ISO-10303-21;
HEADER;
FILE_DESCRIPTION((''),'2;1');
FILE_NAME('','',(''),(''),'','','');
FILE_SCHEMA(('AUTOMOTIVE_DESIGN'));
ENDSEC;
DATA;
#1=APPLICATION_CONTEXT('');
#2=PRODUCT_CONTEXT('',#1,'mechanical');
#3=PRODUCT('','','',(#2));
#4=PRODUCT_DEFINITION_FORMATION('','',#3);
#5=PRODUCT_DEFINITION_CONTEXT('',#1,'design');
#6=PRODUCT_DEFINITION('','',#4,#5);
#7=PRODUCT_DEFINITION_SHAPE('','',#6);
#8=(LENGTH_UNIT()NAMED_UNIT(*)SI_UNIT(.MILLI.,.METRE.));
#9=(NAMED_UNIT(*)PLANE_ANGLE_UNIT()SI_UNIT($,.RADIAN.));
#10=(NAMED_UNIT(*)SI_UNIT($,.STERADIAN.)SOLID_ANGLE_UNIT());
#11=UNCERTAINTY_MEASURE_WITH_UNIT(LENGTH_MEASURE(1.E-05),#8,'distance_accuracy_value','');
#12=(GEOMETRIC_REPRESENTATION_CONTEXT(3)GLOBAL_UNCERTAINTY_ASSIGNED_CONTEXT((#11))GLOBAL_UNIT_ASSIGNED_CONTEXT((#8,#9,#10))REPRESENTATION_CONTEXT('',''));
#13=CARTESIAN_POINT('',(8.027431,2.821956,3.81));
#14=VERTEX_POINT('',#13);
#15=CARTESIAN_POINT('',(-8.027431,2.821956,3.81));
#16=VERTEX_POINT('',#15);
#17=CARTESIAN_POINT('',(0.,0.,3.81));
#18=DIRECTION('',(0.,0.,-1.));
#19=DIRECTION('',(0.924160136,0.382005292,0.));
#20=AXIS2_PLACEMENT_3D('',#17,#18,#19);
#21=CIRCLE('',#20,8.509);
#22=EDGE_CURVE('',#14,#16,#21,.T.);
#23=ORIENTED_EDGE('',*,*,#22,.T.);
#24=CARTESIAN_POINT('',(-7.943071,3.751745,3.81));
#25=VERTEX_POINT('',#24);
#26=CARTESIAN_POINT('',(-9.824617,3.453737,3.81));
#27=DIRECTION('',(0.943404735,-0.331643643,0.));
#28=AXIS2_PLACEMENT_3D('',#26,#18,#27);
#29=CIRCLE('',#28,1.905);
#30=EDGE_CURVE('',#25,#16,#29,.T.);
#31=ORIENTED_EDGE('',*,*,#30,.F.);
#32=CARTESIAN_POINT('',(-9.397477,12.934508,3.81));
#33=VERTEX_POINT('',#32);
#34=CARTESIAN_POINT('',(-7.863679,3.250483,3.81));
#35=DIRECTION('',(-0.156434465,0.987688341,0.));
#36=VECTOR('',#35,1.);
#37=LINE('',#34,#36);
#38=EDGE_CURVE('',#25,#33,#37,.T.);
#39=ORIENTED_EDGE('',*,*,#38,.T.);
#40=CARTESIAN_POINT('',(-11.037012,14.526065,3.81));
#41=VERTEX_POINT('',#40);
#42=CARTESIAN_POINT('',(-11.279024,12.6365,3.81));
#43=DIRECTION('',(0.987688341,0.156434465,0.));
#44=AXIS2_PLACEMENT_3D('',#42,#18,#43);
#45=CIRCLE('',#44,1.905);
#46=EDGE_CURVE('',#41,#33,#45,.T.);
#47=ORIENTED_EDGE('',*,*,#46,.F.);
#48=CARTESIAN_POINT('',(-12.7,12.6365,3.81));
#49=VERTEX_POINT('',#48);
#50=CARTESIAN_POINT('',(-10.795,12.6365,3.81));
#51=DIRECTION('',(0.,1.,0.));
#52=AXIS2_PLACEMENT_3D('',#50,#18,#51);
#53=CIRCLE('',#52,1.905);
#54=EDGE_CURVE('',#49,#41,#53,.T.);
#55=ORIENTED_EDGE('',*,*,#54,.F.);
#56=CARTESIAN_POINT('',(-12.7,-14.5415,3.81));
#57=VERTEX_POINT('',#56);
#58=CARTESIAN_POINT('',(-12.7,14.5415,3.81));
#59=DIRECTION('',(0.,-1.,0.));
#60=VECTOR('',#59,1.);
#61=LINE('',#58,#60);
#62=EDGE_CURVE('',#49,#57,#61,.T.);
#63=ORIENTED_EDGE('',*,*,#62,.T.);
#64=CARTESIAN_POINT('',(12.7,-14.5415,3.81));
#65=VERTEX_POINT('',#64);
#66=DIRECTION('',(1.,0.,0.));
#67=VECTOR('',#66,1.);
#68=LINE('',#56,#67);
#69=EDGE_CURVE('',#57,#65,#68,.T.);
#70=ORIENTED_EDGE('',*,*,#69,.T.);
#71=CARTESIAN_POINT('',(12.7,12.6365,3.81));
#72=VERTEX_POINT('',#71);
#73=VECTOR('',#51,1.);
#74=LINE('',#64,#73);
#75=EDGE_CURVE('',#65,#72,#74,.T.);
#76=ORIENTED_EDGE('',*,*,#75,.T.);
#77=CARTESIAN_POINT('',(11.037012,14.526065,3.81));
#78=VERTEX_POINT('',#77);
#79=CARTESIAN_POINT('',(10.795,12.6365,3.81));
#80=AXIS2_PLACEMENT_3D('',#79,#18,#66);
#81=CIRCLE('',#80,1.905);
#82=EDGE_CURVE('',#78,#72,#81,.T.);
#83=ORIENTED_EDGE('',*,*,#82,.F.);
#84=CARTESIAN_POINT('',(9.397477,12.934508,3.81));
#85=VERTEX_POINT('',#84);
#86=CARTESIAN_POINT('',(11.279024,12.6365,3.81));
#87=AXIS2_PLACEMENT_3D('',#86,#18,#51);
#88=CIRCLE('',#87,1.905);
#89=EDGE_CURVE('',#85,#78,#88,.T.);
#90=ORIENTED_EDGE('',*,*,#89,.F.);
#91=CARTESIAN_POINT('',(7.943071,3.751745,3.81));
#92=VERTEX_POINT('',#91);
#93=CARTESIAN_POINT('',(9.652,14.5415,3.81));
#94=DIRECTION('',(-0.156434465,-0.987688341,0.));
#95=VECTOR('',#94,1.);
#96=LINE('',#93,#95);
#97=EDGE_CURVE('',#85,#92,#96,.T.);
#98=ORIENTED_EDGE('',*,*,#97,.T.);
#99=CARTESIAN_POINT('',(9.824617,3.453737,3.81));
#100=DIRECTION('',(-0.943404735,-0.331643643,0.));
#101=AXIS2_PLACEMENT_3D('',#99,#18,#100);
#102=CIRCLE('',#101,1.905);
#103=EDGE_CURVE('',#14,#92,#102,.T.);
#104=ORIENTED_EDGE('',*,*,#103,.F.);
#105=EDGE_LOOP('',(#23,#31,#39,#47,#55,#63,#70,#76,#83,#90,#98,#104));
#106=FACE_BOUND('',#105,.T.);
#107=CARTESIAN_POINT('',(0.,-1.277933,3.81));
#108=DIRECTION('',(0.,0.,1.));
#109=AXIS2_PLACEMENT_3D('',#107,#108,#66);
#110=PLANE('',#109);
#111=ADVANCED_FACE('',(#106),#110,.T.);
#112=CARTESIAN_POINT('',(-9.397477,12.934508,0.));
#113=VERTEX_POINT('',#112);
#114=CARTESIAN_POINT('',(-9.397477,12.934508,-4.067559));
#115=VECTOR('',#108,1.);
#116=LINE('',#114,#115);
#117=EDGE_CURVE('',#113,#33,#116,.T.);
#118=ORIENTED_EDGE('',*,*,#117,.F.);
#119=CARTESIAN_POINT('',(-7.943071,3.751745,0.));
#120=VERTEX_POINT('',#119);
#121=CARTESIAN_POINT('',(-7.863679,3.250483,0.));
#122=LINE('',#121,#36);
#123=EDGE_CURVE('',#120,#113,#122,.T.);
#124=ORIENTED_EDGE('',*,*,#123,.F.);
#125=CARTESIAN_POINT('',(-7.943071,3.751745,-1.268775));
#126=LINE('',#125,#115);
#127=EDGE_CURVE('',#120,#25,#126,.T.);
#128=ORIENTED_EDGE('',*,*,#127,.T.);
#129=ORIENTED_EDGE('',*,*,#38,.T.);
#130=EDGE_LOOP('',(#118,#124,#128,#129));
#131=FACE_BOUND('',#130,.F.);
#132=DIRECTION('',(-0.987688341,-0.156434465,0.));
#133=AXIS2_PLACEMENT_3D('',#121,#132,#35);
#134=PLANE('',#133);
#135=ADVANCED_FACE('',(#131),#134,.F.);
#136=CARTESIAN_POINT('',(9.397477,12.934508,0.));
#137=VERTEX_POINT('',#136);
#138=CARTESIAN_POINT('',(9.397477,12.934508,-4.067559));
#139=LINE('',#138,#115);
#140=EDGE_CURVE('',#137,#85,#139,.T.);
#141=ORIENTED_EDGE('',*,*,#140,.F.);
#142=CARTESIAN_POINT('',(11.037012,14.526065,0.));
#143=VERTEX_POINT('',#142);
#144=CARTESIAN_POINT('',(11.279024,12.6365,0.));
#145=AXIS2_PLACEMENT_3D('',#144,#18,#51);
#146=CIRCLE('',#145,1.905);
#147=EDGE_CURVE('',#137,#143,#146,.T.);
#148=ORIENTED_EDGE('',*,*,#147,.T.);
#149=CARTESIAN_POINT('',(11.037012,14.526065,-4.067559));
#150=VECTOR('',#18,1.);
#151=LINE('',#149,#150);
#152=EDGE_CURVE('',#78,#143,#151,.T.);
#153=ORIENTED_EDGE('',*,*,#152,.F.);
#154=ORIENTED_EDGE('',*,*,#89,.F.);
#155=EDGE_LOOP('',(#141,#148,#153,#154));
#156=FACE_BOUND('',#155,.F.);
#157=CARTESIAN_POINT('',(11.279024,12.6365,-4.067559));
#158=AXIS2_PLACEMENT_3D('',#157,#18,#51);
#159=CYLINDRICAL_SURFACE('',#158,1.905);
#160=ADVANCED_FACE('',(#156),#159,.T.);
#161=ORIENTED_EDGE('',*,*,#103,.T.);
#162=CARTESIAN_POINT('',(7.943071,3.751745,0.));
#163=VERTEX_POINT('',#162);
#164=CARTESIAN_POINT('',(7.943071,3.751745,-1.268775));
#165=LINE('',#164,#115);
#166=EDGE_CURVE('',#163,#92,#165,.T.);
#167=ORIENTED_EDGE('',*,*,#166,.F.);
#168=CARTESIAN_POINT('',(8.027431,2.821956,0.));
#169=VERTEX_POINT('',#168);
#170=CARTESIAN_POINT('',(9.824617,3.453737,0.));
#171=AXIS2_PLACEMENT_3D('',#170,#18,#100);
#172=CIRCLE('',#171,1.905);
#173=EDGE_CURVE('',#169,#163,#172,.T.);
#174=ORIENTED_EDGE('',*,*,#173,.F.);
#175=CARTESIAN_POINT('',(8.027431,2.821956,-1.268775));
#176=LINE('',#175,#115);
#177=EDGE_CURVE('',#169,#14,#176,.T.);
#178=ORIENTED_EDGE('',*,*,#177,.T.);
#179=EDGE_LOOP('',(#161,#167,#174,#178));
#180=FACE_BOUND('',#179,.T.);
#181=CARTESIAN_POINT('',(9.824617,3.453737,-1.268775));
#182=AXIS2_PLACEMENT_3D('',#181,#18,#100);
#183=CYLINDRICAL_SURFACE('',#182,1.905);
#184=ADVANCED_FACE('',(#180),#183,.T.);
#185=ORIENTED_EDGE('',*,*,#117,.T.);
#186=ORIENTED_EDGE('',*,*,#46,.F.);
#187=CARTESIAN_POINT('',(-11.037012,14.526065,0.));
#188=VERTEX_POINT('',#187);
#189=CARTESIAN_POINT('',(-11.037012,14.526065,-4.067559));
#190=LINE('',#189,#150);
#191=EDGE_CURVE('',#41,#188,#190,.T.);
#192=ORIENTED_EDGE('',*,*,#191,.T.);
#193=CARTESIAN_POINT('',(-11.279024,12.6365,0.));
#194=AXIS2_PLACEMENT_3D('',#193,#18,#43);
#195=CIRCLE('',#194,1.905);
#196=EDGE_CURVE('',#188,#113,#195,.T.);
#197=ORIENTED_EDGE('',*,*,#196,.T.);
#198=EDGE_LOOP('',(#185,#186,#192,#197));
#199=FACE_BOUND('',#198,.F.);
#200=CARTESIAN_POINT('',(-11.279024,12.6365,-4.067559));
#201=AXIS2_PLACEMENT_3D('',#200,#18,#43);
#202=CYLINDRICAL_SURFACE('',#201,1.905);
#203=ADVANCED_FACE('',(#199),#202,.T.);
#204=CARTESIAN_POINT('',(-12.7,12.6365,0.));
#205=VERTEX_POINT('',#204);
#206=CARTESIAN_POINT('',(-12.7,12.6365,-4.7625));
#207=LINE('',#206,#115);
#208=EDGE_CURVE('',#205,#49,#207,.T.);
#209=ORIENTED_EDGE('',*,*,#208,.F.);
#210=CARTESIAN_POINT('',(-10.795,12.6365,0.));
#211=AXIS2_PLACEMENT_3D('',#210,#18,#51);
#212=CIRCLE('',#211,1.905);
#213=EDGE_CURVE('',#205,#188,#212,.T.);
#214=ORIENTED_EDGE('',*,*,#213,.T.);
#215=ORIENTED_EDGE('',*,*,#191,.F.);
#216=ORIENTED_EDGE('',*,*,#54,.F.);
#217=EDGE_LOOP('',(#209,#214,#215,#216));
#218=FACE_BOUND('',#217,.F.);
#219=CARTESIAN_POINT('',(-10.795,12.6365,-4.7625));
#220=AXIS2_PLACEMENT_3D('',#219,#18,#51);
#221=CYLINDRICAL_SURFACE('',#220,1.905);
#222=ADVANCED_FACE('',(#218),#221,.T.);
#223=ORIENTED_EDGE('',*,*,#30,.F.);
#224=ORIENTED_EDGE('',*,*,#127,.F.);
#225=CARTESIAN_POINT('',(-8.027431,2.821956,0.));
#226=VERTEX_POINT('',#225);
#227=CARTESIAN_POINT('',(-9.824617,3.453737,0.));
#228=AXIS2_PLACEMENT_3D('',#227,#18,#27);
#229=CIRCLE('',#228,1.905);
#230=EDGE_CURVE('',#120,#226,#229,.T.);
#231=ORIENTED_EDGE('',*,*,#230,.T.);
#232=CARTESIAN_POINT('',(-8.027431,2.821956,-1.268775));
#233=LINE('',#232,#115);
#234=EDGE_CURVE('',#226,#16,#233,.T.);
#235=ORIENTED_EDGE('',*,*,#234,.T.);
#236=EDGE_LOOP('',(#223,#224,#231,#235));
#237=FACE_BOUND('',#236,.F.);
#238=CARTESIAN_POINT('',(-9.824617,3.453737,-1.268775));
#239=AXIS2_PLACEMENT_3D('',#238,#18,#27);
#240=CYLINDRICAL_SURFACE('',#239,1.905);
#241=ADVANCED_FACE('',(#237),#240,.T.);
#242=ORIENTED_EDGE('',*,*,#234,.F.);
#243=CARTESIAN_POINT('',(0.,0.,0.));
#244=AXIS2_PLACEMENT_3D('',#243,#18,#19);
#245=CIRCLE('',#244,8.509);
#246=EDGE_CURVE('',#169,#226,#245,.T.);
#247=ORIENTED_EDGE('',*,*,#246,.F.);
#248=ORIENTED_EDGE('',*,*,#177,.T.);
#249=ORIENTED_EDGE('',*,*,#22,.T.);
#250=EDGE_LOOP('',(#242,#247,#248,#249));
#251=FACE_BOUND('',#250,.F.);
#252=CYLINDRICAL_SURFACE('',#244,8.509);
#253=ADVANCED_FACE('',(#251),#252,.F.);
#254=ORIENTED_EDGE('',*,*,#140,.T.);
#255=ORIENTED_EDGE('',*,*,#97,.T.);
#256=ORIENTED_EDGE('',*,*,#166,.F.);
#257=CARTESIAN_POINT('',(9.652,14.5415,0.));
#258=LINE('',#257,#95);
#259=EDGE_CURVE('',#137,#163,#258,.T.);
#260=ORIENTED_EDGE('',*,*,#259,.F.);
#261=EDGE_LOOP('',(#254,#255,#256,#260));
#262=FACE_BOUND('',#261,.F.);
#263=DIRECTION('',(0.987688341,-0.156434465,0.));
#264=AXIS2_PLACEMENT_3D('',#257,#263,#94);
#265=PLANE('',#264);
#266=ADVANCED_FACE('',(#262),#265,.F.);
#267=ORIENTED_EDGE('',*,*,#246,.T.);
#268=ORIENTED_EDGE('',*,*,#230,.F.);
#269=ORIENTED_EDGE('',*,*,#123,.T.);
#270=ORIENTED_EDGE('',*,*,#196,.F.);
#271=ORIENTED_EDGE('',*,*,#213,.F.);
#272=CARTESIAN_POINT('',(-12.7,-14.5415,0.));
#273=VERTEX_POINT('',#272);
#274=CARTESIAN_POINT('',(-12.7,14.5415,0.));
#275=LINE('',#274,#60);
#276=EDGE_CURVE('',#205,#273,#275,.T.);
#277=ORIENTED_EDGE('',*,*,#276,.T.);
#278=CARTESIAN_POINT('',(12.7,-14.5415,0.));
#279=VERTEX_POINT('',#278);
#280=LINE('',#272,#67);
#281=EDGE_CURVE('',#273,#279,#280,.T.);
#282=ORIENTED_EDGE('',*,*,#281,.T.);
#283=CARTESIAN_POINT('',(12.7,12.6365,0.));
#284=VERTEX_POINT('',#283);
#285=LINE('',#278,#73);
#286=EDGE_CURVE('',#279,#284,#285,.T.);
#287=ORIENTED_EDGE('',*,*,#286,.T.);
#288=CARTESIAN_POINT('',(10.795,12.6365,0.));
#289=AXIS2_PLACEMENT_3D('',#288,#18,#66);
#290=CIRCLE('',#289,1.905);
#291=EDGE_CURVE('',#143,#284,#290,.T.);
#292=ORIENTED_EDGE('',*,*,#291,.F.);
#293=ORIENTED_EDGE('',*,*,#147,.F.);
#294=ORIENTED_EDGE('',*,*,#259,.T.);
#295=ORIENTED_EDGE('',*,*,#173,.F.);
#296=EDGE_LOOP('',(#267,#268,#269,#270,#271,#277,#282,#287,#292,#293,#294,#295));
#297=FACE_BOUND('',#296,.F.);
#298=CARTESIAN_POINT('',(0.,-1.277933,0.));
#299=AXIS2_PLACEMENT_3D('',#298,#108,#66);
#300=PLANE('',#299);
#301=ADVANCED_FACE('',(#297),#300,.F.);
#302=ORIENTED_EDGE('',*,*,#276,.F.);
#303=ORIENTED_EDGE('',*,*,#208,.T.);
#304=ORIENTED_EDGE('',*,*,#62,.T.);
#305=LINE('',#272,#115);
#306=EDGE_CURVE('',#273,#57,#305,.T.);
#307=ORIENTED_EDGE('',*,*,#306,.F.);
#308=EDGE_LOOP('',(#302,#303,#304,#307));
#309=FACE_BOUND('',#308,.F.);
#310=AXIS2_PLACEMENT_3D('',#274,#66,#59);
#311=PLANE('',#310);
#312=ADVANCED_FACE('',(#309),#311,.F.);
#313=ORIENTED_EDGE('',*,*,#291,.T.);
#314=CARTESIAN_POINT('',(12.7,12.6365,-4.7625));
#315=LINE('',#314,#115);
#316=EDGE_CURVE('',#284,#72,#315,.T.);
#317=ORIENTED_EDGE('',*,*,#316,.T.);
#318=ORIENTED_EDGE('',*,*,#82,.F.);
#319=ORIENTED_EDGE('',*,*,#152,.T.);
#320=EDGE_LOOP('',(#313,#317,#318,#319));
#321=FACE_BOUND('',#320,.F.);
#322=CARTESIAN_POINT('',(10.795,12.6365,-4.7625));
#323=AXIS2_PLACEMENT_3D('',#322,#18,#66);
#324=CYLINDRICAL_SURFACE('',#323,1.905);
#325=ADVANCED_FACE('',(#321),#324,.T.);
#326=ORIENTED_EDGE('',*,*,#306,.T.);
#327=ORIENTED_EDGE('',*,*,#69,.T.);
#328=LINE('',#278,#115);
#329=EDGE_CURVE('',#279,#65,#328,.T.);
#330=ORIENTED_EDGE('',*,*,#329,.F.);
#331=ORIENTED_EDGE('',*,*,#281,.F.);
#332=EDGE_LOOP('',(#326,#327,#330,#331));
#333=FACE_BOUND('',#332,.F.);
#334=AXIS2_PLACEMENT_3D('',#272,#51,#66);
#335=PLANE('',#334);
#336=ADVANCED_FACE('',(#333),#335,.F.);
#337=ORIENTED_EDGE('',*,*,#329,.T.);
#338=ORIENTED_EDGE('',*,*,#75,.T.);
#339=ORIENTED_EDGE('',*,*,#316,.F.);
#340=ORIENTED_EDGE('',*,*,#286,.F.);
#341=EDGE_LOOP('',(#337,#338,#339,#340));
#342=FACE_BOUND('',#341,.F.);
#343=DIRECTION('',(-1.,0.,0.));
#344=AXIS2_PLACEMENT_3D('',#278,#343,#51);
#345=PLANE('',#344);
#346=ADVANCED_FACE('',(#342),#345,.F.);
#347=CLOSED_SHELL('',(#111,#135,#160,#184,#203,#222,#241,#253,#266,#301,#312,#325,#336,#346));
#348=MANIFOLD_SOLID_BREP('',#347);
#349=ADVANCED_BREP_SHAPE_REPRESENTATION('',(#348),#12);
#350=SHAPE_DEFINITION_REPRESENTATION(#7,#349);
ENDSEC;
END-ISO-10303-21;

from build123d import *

# Parameters (mm, degrees)
F1_DEPTH    = 3.81
F2_T1_DEPTH = 11.945118529
F2_T3_DEPTH = 13.335
F2_T5_DEPTH = 6.3475490509


# Not quite as in the source:
# - a fillet or chamfer that OpenCascade refuses, or shapes differently, is made with other operations: its cross-section is extruded or revolved along the edge and cut away or added


with BuildPart() as f1:
    # F0 (on Top) → F1 (new body)
    with BuildSketch(Plane.XY):
        with BuildLine():
            ThreePointArc((7.8636785966, 3.2504830303), (0, -8.509), (-7.8636785966, 3.2504830303))
            Line((-7.8636785966, 3.2504830303), (-9.652, 14.5415))
            Line((-9.652, 14.5415), (-12.7, 14.5415))
            Line((-12.7, 14.5415), (-12.7, -14.5415))
            Line((-12.7, -14.5415), (12.7, -14.5415))
            Line((12.7, -14.5415), (12.7, 14.5415))
            Line((12.7, 14.5415), (9.652, 14.5415))
            Line((9.652, 14.5415), (7.8636785966, 3.2504830303))
        make_face()
    extrude(amount=F1_DEPTH)

    # F2: fillet of radius 1.905 on 6 edges, made by hand

    # F2_s2 → F2_t1 (cut)
    with BuildSketch(Plane.XY.offset(-4.0675592645)):
        with BuildLine():
            ThreePointArc((-9.397477417, 12.9345076559), (-10.0418251737, 14.0850733645), (-11.2790237058, 14.5415))
            Line((-11.2790237058, 14.5415), (-9.652, 14.5415))
            Line((-9.652, 14.5415), (-9.397477417, 12.9345076559))
        make_face()
        with BuildLine():
            ThreePointArc((11.2790237058, 14.5415), (10.0418251737, 14.0850733645), (9.397477417, 12.9345076559))
            Line((9.397477417, 12.9345076559), (9.652, 14.5415))
            Line((9.652, 14.5415), (11.2790237058, 14.5415))
        make_face()
    extrude(amount=F2_T1_DEPTH, mode=Mode.SUBTRACT)

    # F2_s4 → F2_t3 (cut)
    with BuildSketch(Plane.XY.offset(-4.7625)):
        with BuildLine():
            ThreePointArc((-10.795, 14.5415), (-12.1420384182, 13.9835384182), (-12.7, 12.6365))
            Line((-12.7, 12.6365), (-12.7, 14.5415))
            Line((-12.7, 14.5415), (-10.795, 14.5415))
        make_face()
        with BuildLine():
            ThreePointArc((12.7, 12.6365), (12.1420384182, 13.9835384182), (10.795, 14.5415))
            Line((10.795, 14.5415), (12.7, 14.5415))
            Line((12.7, 14.5415), (12.7, 12.6365))
        make_face()
    extrude(amount=F2_T3_DEPTH, mode=Mode.SUBTRACT)

    # F2_s6 → F2_t5 (cut)
    with BuildSketch(Plane.XY.offset(-1.2687745255)):
        with BuildLine():
            ThreePointArc((-8.0274308907, 2.821955757), (-7.9274098449, 3.2816022158), (-7.9430706222, 3.7517445525))
            Line((-7.9430706222, 3.7517445525), (-7.8636785966, 3.2504830303))
            ThreePointArc((-7.8636785966, 3.2504830303), (-7.9484431866, 3.0373231487), (-8.0274308907, 2.821955757))
        make_face()
        with BuildLine():
            ThreePointArc((8.0274308907, 2.821955757), (7.9274098449, 3.2816022158), (7.9430706222, 3.7517445525))
            Line((7.9430706222, 3.7517445525), (7.8636785966, 3.2504830303))
            ThreePointArc((7.8636785966, 3.2504830303), (7.9484431866, 3.0373231487), (8.0274308907, 2.821955757))
        make_face()
    extrude(amount=F2_T5_DEPTH, mode=Mode.SUBTRACT)


solid = f1.part
